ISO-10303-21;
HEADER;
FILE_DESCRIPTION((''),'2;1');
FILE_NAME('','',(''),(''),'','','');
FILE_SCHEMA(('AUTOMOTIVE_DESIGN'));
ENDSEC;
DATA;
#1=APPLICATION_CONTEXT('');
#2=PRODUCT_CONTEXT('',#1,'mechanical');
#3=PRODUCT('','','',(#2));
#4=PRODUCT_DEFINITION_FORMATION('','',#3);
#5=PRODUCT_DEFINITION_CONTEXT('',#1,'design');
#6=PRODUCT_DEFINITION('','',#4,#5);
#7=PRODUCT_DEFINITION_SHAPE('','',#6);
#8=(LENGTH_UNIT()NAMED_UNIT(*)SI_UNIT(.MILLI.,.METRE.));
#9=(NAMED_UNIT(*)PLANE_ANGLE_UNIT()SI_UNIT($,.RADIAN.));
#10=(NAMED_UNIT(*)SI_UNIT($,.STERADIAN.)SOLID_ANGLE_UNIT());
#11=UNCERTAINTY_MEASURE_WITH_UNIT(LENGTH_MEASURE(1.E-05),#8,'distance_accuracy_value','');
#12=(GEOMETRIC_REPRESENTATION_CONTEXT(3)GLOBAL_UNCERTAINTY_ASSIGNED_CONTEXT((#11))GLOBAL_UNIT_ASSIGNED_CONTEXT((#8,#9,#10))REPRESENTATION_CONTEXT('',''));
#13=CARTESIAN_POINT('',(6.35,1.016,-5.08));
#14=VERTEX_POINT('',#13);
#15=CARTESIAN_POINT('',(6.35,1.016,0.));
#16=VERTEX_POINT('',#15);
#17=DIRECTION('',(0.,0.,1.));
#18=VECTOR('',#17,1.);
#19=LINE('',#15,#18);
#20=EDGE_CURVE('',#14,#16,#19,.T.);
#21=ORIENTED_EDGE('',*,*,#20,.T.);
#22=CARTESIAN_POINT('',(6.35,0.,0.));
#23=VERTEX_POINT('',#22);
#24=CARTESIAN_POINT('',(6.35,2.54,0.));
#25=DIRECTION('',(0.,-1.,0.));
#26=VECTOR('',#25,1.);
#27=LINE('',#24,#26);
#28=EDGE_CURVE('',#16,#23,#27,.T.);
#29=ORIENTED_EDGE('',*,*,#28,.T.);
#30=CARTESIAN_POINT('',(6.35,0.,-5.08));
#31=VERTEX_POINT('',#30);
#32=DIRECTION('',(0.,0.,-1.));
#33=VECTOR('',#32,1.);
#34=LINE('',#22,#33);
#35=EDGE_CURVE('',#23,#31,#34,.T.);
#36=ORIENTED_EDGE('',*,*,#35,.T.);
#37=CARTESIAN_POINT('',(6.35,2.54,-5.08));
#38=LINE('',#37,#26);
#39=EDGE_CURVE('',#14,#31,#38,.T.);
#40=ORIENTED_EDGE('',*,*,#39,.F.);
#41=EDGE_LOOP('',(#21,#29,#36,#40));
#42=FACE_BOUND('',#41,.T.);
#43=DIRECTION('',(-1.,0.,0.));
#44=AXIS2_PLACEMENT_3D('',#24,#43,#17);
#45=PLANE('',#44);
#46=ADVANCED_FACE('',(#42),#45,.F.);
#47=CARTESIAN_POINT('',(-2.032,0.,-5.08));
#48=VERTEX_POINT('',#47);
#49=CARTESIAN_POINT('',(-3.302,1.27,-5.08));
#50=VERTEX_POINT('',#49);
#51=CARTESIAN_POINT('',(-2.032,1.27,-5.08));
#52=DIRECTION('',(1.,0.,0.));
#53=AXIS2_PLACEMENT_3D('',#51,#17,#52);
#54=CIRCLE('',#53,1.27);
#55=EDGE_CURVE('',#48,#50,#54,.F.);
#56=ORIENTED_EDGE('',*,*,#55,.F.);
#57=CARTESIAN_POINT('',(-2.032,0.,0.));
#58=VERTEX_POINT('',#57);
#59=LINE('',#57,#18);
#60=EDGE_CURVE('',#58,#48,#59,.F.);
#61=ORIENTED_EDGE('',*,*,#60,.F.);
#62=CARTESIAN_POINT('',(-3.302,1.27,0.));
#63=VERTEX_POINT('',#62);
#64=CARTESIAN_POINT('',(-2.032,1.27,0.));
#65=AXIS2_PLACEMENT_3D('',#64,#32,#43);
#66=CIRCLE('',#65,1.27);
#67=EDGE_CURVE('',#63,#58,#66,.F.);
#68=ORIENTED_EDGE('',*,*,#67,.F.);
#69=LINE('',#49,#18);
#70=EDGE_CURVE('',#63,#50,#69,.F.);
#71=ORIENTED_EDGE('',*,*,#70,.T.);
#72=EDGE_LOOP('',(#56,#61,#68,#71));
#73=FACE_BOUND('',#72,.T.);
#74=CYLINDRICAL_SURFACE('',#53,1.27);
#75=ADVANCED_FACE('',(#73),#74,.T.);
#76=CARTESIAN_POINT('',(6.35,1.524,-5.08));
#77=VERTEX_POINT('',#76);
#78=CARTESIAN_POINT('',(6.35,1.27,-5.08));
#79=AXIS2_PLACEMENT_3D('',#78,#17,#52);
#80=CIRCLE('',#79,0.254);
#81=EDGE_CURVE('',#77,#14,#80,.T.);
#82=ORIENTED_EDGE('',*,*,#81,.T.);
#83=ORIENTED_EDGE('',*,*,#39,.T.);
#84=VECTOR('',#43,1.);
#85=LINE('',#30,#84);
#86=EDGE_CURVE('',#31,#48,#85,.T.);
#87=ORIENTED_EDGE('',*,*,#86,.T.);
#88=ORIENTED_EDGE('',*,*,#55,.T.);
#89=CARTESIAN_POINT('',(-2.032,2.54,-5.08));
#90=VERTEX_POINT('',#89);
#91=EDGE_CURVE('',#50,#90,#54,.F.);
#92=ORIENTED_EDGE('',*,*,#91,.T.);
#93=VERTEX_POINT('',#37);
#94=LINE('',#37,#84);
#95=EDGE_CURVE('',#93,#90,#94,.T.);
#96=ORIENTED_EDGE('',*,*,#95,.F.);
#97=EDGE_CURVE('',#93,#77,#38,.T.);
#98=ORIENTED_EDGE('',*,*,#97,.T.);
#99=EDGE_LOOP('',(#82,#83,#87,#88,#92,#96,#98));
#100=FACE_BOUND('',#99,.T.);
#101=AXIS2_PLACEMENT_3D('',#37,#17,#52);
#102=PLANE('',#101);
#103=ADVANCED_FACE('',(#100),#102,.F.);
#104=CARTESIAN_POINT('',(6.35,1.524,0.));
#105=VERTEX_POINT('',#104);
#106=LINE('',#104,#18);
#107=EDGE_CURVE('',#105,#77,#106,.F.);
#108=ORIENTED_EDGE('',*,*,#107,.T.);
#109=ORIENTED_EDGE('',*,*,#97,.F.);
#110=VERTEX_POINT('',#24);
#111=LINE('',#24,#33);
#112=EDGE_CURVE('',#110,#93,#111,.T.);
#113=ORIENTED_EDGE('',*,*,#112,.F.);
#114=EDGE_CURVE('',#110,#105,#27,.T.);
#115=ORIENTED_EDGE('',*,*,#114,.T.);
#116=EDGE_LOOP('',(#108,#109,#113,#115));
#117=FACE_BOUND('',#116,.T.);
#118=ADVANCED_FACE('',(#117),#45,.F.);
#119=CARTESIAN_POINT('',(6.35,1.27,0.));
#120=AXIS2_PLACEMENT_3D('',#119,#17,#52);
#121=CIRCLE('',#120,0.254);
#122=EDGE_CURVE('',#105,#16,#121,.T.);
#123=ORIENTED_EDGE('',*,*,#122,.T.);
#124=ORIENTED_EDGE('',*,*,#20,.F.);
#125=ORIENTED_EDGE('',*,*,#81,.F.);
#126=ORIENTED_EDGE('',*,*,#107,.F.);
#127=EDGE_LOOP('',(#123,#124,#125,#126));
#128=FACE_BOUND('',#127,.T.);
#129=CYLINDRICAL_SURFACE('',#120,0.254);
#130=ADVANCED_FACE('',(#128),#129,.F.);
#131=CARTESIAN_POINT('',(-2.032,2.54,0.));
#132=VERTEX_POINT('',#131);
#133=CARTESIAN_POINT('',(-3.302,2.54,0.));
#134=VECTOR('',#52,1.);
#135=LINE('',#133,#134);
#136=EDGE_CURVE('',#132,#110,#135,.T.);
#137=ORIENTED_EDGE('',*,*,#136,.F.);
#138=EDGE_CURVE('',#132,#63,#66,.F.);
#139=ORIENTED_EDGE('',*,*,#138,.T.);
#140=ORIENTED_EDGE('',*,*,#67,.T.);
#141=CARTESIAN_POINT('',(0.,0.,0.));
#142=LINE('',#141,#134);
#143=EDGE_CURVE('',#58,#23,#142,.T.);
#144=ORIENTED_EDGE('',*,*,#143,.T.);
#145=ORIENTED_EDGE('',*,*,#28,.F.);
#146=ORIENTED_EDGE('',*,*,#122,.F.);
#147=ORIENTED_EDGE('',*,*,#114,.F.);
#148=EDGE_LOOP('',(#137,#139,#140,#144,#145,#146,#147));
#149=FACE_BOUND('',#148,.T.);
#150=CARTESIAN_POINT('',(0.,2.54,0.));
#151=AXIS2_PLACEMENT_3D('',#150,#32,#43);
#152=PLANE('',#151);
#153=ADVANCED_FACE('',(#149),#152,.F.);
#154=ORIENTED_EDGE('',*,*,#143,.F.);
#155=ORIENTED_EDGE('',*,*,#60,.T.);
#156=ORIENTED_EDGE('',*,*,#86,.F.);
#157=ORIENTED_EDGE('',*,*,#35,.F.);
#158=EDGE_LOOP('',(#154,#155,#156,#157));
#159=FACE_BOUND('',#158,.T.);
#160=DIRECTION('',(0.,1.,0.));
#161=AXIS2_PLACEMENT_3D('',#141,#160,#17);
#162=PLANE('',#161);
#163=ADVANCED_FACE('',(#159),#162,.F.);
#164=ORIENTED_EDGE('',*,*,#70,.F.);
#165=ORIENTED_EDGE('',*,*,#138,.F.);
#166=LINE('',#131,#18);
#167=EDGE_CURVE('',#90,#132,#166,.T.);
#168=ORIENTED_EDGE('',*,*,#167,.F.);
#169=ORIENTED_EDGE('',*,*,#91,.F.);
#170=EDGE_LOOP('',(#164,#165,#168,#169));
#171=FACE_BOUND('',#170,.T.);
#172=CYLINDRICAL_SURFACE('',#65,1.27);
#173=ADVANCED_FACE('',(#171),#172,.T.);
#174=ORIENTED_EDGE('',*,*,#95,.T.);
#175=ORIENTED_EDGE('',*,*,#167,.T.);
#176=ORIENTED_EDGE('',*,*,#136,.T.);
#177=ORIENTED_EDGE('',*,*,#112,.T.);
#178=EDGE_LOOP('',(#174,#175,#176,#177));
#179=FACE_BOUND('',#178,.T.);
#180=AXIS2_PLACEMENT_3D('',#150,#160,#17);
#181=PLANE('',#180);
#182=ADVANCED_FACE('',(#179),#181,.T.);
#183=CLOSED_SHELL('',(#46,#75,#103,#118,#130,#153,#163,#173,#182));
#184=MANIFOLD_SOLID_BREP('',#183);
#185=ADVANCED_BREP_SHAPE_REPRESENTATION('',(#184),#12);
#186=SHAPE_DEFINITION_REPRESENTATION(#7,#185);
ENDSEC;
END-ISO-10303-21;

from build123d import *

# Parameters (mm, degrees)
BOSS_EXTRUDE1_DEPTH              = 2.54
FILLET1_R                        = 1.27
F_97_0_0059_DIAMETER_HOLE2_D     = 0.508
F_97_0_0059_DIAMETER_HOLE2_DEPTH = 25.4
F_97_0_0059_DIAMETER_HOLE2_TIP   = 0.152618597


with BuildPart() as part:
    # Sketch1 → Boss-Extrude1 (new body)
    with BuildSketch(Plane(origin=(0, 0, 0), x_dir=(1, 0, 0), z_dir=(0, 1, 0))):
        Polygon((0, 0), (6.35, 0), (6.35, 5.08), (-3.302, 5.08), (-3.302, 0), align=None)
    extrude(amount=BOSS_EXTRUDE1_DEPTH)

    # Fillet1
    fillet1_edges = [part.edges().sort_by_distance(p)[0] for p in [
        (-3.302, 0, -2.54),
        (-3.302, 2.54, -2.54),
    ]]
    fillet(fillet1_edges, radius=FILLET1_R - 0.0001)  # a hair under: the kernel refuses the full size

    # #97 (0.0059) Diameter Hole2
    with Locations(Plane.XY):
        with Locations((6.35, 1.27)):
            Hole(F_97_0_0059_DIAMETER_HOLE2_D / 2, depth=F_97_0_0059_DIAMETER_HOLE2_DEPTH)
            with Locations((0, 0, -(F_97_0_0059_DIAMETER_HOLE2_DEPTH + F_97_0_0059_DIAMETER_HOLE2_TIP / 2))):  # 118° drill point
                Cone(0, F_97_0_0059_DIAMETER_HOLE2_D / 2, F_97_0_0059_DIAMETER_HOLE2_TIP, mode=Mode.SUBTRACT)


solid = part.part
